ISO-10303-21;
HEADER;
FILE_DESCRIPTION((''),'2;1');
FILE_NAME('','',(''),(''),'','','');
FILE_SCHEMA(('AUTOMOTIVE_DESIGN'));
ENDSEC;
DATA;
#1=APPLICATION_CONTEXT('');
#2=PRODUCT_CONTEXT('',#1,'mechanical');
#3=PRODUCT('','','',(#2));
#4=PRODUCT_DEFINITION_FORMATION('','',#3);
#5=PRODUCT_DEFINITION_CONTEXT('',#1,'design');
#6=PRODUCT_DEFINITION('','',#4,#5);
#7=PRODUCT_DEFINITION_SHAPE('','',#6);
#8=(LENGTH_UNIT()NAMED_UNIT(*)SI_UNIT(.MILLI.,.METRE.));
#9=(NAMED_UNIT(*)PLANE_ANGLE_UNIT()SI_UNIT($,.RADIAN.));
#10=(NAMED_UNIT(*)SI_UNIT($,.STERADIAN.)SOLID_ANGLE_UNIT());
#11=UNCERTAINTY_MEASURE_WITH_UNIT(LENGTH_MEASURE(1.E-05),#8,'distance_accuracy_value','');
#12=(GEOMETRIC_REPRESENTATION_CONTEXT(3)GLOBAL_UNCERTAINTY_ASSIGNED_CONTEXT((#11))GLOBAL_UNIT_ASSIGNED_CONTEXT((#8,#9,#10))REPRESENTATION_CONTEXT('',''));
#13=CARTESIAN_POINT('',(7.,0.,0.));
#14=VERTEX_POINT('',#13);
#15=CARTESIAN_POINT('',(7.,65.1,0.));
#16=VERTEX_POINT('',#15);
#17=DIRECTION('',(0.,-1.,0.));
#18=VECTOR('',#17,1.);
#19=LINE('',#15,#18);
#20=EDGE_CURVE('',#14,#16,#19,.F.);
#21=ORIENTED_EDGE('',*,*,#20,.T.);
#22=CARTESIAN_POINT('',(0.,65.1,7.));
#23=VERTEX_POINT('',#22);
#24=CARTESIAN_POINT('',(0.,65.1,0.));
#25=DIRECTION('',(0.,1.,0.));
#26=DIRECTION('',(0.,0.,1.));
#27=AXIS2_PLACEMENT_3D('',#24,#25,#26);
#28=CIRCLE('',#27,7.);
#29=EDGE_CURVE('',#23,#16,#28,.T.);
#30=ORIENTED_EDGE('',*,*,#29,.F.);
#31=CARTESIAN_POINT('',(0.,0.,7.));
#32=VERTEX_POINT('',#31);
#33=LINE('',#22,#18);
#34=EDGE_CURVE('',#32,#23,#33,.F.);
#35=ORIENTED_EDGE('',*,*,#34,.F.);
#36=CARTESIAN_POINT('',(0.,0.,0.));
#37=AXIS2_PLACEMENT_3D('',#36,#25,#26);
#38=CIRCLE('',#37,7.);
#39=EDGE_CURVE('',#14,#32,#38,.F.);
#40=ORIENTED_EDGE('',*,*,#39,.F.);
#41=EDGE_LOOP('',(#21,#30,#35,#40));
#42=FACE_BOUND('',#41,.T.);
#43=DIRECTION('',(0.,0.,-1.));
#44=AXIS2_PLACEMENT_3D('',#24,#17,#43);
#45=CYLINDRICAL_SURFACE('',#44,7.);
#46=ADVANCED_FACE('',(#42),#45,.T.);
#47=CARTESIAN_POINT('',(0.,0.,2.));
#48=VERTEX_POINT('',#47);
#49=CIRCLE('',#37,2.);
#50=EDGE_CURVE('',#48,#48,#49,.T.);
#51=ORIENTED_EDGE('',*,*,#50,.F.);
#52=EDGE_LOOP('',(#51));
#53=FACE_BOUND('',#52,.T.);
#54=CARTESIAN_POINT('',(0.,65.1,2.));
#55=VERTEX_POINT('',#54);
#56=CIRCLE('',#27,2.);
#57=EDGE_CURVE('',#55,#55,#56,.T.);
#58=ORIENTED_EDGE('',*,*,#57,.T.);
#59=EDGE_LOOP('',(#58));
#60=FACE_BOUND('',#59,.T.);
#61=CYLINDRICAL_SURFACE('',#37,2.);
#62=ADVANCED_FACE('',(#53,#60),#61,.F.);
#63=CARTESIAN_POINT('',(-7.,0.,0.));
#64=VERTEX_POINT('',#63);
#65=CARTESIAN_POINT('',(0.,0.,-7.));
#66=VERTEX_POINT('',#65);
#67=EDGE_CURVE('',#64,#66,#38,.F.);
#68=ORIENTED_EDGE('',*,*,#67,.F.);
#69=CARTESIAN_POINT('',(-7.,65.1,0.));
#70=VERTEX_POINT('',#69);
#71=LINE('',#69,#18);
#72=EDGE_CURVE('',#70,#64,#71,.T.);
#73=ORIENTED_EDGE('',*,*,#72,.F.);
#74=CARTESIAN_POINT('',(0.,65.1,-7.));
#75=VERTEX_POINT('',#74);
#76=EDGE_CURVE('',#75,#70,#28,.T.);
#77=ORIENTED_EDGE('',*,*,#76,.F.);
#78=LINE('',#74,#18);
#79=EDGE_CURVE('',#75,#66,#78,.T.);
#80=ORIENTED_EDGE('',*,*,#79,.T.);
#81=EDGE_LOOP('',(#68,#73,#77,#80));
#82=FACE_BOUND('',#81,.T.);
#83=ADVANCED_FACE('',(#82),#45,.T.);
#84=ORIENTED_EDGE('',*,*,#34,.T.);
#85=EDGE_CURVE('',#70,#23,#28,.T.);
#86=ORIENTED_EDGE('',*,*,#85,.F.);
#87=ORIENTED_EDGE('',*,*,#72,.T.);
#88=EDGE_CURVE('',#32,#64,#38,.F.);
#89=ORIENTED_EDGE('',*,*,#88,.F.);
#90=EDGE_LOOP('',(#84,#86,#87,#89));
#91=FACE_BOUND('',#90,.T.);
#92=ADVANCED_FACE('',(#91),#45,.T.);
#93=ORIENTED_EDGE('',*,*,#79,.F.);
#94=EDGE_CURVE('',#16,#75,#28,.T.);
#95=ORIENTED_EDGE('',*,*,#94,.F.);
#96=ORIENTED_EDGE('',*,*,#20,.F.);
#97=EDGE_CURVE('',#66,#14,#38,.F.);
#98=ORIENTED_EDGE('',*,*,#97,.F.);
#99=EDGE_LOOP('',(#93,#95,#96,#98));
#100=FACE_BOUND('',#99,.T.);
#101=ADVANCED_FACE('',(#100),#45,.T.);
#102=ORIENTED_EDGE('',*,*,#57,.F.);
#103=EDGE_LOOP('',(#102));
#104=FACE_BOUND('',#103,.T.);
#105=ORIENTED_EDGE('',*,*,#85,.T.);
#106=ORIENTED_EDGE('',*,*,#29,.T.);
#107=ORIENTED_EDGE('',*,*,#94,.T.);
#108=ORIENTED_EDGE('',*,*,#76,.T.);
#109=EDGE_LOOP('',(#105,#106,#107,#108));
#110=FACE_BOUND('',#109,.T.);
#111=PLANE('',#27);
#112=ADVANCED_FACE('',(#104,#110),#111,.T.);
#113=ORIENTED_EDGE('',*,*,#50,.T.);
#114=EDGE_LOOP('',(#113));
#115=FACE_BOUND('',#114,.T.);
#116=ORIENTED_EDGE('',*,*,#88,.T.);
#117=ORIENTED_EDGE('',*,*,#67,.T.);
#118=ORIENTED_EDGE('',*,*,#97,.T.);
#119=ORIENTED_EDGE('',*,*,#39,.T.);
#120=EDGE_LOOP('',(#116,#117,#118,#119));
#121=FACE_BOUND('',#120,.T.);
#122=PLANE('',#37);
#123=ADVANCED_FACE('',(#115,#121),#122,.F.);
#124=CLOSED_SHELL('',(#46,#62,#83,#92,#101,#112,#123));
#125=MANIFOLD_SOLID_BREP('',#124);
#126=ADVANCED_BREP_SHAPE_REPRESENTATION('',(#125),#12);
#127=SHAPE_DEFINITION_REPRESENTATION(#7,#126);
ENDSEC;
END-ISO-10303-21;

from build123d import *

# Parameters (mm, degrees)
SKETCH1_W           = 14
SKETCH1_H           = 14
BOSS_EXTRUDE2_DEPTH = 65.1
SKETCH2_R           = 2
CUT_EXTRUDE1_DEPTH  = 66.848386465
FILLET1_R           = 7


with BuildPart() as part:
    # Sketch1 → Boss-Extrude2 (new body)
    with BuildSketch(Plane(origin=(0, 0, 0), x_dir=(1, 0, 0), z_dir=(0, 1, 0))):
        Rectangle(SKETCH1_W, SKETCH1_H)
    extrude(amount=BOSS_EXTRUDE2_DEPTH)

    # Sketch2 → Cut-Extrude1 (cut, through all)
    with BuildSketch(Plane(origin=(0, 65.1, 0), x_dir=(1, 0, 0), z_dir=(0, 1, 0))):
        with Locations(Location((0, 0, 0), (0, 0, 270))):
            Circle(SKETCH2_R)
    extrude(amount=-CUT_EXTRUDE1_DEPTH, mode=Mode.SUBTRACT)

    # Fillet1
    fillet1_edges = [part.edges().sort_by_distance(p)[0] for p in [
        (-7, 32.55, 7),
        (-7, 32.55, -7),
        (7, 32.55, -7),
        (7, 32.55, 7),
    ]]
    fillet(fillet1_edges, radius=FILLET1_R - 0.0001)  # a hair under: the kernel refuses the full size


solid = part.part
